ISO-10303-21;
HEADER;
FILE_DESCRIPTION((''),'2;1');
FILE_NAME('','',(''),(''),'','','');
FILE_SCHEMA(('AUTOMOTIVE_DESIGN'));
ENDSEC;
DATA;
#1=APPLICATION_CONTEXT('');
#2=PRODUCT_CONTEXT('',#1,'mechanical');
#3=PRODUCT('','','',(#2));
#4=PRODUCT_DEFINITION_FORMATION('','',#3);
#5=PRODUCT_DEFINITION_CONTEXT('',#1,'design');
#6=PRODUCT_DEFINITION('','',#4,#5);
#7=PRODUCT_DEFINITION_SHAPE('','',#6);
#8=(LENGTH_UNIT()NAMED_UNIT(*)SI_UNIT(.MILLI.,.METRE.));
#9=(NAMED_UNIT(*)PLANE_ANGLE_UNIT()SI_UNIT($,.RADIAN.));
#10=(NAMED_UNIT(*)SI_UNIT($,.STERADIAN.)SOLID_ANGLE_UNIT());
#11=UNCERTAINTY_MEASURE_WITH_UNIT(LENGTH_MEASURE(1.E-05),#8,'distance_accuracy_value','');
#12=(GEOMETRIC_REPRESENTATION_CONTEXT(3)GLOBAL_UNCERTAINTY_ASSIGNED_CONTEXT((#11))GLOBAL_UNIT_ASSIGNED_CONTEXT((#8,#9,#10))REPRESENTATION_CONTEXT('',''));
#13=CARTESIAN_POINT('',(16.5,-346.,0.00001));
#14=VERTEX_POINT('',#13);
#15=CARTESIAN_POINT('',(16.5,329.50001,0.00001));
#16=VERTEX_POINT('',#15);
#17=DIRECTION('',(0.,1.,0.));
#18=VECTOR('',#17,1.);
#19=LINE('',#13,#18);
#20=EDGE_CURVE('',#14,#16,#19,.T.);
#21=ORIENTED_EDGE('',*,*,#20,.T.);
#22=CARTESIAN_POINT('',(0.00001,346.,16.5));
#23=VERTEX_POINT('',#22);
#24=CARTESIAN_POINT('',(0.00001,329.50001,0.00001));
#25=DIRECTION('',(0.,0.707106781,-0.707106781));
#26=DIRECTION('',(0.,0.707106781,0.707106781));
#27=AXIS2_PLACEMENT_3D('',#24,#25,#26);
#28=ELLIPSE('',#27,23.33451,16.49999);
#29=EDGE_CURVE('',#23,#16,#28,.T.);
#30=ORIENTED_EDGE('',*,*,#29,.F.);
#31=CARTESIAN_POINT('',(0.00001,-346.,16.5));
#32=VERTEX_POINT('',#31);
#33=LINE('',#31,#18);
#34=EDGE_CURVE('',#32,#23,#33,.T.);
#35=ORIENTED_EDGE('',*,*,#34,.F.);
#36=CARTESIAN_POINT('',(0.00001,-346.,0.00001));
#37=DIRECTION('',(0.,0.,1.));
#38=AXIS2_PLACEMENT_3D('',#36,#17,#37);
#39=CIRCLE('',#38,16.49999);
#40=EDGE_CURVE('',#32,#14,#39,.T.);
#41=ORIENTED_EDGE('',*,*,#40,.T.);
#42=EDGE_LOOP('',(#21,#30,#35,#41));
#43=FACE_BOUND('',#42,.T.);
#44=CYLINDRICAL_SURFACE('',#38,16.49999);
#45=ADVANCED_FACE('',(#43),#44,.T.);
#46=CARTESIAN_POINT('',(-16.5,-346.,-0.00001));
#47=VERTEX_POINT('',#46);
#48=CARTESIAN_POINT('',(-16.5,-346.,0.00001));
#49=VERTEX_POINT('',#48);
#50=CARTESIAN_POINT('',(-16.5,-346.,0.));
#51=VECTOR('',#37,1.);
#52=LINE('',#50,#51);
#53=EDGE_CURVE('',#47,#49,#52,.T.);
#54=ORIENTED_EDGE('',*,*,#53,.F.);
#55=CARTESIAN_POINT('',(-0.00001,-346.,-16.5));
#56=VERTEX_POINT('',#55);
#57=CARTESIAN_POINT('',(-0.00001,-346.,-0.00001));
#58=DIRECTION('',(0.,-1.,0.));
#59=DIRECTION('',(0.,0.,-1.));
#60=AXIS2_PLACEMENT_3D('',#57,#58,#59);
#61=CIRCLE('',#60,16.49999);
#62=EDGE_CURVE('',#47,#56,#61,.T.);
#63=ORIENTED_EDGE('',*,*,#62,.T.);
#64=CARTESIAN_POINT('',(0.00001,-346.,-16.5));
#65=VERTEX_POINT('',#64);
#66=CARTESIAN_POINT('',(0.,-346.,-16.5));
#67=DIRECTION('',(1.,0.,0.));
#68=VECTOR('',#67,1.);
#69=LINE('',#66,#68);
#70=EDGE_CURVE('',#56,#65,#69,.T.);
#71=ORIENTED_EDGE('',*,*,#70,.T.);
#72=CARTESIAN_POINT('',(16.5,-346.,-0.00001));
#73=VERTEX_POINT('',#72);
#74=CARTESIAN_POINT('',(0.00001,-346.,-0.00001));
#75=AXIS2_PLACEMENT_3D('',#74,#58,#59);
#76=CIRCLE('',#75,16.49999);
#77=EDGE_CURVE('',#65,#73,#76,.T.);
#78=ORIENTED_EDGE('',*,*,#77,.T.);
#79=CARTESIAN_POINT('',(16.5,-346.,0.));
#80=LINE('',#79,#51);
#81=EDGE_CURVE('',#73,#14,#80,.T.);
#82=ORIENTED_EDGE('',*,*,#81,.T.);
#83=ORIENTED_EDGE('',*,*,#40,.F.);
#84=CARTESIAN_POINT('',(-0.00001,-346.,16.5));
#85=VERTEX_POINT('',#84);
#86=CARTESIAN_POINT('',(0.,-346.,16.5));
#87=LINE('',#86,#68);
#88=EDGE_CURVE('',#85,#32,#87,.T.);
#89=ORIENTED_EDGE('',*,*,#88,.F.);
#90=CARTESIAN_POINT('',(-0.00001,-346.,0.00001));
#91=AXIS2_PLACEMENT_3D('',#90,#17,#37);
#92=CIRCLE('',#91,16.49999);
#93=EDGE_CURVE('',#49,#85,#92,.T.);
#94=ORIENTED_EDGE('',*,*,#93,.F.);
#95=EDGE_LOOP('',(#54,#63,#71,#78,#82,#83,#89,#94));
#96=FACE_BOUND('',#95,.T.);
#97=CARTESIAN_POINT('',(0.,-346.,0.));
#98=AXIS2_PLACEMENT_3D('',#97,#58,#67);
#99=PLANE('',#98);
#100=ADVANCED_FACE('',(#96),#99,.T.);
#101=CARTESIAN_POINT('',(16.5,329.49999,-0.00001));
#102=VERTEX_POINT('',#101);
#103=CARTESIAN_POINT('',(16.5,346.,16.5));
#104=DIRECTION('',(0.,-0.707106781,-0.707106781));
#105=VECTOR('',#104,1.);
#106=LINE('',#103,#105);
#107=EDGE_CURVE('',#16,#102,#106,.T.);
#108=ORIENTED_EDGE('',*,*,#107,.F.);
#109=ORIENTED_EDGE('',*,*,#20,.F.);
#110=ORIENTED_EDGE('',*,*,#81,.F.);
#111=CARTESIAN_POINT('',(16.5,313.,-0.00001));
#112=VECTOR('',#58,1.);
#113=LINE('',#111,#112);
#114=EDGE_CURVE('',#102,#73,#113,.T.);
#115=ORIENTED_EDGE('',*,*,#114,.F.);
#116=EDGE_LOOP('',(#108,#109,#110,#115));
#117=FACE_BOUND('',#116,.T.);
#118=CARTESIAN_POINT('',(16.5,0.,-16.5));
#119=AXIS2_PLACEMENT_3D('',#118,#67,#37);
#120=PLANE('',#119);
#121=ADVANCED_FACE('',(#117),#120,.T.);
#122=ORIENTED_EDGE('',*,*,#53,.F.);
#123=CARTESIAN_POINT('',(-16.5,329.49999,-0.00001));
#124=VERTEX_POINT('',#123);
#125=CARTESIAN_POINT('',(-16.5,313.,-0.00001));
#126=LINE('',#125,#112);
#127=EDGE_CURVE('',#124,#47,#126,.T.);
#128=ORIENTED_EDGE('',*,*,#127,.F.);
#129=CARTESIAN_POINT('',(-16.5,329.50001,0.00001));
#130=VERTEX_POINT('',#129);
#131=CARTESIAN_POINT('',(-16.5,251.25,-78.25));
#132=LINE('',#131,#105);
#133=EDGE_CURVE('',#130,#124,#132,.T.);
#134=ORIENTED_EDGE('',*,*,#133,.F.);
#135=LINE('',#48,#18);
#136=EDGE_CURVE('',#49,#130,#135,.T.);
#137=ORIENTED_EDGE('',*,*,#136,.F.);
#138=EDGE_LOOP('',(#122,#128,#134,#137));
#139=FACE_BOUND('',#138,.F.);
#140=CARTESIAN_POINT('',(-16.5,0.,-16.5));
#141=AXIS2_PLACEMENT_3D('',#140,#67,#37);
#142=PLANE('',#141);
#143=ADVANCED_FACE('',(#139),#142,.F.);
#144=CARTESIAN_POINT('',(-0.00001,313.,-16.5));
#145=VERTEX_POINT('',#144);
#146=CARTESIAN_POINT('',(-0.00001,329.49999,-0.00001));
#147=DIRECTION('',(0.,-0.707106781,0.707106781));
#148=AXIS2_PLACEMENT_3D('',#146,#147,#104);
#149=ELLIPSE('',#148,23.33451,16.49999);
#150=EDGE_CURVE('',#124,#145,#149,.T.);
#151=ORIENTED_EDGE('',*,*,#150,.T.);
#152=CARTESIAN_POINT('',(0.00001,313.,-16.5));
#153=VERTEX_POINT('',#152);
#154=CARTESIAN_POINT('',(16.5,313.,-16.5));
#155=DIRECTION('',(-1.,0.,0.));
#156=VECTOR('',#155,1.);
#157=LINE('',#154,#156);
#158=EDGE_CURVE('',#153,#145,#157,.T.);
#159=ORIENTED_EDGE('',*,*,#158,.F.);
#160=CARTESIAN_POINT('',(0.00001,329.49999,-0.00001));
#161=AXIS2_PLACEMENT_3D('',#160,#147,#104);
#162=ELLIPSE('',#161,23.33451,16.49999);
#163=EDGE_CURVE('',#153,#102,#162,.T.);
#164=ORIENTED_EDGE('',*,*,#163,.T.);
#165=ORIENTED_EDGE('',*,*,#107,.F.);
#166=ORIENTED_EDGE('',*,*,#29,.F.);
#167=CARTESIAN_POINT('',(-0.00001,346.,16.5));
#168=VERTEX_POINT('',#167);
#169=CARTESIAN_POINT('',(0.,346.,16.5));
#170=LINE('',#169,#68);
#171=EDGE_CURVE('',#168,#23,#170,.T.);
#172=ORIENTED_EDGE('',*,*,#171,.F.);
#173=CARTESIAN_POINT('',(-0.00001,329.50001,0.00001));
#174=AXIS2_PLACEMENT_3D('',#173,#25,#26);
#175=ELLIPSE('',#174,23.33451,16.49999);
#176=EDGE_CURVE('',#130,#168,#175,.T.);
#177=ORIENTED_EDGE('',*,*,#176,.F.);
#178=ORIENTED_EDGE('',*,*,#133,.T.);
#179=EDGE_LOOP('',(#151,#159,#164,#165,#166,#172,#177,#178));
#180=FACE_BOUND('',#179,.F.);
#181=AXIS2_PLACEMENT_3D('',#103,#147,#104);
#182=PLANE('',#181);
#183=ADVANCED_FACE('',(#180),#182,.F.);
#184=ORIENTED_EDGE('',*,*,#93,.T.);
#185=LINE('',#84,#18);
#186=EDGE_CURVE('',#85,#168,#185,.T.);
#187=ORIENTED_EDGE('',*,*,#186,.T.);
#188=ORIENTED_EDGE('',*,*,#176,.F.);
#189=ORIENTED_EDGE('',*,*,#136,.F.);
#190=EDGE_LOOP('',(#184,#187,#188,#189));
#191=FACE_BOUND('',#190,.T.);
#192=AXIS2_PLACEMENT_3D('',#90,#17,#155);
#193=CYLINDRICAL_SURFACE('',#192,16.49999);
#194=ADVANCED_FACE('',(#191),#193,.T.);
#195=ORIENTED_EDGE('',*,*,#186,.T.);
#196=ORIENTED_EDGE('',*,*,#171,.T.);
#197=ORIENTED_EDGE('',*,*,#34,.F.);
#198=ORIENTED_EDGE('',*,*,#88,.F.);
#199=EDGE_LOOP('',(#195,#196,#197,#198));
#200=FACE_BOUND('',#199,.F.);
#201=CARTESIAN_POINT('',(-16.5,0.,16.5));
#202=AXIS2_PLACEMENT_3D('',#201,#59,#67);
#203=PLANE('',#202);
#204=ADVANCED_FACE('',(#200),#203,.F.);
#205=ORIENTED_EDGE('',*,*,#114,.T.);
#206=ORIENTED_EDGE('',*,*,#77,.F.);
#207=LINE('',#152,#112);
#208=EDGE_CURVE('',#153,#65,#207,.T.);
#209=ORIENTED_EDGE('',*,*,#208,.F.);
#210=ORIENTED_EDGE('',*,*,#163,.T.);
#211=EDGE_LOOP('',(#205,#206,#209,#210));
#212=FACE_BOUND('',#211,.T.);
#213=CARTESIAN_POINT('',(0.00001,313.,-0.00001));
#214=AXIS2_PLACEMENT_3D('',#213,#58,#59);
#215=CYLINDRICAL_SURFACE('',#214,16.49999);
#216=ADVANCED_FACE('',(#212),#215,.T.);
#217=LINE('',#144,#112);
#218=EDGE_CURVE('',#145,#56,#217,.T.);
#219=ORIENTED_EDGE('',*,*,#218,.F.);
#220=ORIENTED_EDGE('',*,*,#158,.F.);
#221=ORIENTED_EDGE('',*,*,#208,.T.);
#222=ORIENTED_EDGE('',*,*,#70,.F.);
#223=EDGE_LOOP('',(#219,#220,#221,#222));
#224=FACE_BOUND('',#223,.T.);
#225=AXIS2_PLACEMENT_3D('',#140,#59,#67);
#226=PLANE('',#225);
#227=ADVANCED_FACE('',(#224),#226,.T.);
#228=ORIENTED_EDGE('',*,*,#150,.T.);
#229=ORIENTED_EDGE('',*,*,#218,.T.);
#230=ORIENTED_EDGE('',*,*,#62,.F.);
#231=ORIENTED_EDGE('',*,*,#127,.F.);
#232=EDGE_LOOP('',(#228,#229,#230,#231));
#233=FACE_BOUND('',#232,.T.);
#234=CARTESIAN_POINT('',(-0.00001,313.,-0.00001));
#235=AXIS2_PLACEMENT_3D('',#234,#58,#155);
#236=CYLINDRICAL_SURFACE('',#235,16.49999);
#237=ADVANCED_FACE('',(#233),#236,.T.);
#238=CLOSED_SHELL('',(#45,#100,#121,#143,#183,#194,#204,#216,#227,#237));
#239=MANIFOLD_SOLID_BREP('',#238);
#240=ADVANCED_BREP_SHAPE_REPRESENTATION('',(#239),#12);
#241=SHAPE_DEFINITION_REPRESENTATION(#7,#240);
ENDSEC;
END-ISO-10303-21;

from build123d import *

# Parameters (mm, degrees)
F0_W     = 33
F0_H     = 33
F1_DEPTH = 346
F3_DEPTH = 50
F4_R     = 16.49999


# Not quite as in the source:
# - a fillet or chamfer is up to 0.001 mm smaller than in the source, because OpenCascade refuses the exact size
# - a feature names something its author has since deleted; it is built from what else it names


with BuildPart() as f1:
    # F0 (on Front) → F1 (new body, symmetric)
    with BuildSketch(Plane.XZ):
        Rectangle(F0_W, F0_H)
    extrude(amount=F1_DEPTH, both=True)

    # F2 (on face) → F3 (cut)
    with BuildSketch(Plane.YZ.offset(16.5)):
        Polygon((346, -16.5), (346, 16.5), (313, -16.5), align=None)
    extrude(amount=-F3_DEPTH, mode=Mode.SUBTRACT)

    # F4 (radius 16.5 in the source; OpenCascade refuses exactly that, so slightly less here)
    f4_edges = [f1.edges().sort_by_distance(p)[0] for p in [
        (16.5, 0, 16.5),
        (16.5, -16.5, -16.5),
        (-16.5, -16.5, -16.5),
        (-16.5, 0, 16.5),
    ]]
    fillet(f4_edges, radius=F4_R)


solid = f1.part
